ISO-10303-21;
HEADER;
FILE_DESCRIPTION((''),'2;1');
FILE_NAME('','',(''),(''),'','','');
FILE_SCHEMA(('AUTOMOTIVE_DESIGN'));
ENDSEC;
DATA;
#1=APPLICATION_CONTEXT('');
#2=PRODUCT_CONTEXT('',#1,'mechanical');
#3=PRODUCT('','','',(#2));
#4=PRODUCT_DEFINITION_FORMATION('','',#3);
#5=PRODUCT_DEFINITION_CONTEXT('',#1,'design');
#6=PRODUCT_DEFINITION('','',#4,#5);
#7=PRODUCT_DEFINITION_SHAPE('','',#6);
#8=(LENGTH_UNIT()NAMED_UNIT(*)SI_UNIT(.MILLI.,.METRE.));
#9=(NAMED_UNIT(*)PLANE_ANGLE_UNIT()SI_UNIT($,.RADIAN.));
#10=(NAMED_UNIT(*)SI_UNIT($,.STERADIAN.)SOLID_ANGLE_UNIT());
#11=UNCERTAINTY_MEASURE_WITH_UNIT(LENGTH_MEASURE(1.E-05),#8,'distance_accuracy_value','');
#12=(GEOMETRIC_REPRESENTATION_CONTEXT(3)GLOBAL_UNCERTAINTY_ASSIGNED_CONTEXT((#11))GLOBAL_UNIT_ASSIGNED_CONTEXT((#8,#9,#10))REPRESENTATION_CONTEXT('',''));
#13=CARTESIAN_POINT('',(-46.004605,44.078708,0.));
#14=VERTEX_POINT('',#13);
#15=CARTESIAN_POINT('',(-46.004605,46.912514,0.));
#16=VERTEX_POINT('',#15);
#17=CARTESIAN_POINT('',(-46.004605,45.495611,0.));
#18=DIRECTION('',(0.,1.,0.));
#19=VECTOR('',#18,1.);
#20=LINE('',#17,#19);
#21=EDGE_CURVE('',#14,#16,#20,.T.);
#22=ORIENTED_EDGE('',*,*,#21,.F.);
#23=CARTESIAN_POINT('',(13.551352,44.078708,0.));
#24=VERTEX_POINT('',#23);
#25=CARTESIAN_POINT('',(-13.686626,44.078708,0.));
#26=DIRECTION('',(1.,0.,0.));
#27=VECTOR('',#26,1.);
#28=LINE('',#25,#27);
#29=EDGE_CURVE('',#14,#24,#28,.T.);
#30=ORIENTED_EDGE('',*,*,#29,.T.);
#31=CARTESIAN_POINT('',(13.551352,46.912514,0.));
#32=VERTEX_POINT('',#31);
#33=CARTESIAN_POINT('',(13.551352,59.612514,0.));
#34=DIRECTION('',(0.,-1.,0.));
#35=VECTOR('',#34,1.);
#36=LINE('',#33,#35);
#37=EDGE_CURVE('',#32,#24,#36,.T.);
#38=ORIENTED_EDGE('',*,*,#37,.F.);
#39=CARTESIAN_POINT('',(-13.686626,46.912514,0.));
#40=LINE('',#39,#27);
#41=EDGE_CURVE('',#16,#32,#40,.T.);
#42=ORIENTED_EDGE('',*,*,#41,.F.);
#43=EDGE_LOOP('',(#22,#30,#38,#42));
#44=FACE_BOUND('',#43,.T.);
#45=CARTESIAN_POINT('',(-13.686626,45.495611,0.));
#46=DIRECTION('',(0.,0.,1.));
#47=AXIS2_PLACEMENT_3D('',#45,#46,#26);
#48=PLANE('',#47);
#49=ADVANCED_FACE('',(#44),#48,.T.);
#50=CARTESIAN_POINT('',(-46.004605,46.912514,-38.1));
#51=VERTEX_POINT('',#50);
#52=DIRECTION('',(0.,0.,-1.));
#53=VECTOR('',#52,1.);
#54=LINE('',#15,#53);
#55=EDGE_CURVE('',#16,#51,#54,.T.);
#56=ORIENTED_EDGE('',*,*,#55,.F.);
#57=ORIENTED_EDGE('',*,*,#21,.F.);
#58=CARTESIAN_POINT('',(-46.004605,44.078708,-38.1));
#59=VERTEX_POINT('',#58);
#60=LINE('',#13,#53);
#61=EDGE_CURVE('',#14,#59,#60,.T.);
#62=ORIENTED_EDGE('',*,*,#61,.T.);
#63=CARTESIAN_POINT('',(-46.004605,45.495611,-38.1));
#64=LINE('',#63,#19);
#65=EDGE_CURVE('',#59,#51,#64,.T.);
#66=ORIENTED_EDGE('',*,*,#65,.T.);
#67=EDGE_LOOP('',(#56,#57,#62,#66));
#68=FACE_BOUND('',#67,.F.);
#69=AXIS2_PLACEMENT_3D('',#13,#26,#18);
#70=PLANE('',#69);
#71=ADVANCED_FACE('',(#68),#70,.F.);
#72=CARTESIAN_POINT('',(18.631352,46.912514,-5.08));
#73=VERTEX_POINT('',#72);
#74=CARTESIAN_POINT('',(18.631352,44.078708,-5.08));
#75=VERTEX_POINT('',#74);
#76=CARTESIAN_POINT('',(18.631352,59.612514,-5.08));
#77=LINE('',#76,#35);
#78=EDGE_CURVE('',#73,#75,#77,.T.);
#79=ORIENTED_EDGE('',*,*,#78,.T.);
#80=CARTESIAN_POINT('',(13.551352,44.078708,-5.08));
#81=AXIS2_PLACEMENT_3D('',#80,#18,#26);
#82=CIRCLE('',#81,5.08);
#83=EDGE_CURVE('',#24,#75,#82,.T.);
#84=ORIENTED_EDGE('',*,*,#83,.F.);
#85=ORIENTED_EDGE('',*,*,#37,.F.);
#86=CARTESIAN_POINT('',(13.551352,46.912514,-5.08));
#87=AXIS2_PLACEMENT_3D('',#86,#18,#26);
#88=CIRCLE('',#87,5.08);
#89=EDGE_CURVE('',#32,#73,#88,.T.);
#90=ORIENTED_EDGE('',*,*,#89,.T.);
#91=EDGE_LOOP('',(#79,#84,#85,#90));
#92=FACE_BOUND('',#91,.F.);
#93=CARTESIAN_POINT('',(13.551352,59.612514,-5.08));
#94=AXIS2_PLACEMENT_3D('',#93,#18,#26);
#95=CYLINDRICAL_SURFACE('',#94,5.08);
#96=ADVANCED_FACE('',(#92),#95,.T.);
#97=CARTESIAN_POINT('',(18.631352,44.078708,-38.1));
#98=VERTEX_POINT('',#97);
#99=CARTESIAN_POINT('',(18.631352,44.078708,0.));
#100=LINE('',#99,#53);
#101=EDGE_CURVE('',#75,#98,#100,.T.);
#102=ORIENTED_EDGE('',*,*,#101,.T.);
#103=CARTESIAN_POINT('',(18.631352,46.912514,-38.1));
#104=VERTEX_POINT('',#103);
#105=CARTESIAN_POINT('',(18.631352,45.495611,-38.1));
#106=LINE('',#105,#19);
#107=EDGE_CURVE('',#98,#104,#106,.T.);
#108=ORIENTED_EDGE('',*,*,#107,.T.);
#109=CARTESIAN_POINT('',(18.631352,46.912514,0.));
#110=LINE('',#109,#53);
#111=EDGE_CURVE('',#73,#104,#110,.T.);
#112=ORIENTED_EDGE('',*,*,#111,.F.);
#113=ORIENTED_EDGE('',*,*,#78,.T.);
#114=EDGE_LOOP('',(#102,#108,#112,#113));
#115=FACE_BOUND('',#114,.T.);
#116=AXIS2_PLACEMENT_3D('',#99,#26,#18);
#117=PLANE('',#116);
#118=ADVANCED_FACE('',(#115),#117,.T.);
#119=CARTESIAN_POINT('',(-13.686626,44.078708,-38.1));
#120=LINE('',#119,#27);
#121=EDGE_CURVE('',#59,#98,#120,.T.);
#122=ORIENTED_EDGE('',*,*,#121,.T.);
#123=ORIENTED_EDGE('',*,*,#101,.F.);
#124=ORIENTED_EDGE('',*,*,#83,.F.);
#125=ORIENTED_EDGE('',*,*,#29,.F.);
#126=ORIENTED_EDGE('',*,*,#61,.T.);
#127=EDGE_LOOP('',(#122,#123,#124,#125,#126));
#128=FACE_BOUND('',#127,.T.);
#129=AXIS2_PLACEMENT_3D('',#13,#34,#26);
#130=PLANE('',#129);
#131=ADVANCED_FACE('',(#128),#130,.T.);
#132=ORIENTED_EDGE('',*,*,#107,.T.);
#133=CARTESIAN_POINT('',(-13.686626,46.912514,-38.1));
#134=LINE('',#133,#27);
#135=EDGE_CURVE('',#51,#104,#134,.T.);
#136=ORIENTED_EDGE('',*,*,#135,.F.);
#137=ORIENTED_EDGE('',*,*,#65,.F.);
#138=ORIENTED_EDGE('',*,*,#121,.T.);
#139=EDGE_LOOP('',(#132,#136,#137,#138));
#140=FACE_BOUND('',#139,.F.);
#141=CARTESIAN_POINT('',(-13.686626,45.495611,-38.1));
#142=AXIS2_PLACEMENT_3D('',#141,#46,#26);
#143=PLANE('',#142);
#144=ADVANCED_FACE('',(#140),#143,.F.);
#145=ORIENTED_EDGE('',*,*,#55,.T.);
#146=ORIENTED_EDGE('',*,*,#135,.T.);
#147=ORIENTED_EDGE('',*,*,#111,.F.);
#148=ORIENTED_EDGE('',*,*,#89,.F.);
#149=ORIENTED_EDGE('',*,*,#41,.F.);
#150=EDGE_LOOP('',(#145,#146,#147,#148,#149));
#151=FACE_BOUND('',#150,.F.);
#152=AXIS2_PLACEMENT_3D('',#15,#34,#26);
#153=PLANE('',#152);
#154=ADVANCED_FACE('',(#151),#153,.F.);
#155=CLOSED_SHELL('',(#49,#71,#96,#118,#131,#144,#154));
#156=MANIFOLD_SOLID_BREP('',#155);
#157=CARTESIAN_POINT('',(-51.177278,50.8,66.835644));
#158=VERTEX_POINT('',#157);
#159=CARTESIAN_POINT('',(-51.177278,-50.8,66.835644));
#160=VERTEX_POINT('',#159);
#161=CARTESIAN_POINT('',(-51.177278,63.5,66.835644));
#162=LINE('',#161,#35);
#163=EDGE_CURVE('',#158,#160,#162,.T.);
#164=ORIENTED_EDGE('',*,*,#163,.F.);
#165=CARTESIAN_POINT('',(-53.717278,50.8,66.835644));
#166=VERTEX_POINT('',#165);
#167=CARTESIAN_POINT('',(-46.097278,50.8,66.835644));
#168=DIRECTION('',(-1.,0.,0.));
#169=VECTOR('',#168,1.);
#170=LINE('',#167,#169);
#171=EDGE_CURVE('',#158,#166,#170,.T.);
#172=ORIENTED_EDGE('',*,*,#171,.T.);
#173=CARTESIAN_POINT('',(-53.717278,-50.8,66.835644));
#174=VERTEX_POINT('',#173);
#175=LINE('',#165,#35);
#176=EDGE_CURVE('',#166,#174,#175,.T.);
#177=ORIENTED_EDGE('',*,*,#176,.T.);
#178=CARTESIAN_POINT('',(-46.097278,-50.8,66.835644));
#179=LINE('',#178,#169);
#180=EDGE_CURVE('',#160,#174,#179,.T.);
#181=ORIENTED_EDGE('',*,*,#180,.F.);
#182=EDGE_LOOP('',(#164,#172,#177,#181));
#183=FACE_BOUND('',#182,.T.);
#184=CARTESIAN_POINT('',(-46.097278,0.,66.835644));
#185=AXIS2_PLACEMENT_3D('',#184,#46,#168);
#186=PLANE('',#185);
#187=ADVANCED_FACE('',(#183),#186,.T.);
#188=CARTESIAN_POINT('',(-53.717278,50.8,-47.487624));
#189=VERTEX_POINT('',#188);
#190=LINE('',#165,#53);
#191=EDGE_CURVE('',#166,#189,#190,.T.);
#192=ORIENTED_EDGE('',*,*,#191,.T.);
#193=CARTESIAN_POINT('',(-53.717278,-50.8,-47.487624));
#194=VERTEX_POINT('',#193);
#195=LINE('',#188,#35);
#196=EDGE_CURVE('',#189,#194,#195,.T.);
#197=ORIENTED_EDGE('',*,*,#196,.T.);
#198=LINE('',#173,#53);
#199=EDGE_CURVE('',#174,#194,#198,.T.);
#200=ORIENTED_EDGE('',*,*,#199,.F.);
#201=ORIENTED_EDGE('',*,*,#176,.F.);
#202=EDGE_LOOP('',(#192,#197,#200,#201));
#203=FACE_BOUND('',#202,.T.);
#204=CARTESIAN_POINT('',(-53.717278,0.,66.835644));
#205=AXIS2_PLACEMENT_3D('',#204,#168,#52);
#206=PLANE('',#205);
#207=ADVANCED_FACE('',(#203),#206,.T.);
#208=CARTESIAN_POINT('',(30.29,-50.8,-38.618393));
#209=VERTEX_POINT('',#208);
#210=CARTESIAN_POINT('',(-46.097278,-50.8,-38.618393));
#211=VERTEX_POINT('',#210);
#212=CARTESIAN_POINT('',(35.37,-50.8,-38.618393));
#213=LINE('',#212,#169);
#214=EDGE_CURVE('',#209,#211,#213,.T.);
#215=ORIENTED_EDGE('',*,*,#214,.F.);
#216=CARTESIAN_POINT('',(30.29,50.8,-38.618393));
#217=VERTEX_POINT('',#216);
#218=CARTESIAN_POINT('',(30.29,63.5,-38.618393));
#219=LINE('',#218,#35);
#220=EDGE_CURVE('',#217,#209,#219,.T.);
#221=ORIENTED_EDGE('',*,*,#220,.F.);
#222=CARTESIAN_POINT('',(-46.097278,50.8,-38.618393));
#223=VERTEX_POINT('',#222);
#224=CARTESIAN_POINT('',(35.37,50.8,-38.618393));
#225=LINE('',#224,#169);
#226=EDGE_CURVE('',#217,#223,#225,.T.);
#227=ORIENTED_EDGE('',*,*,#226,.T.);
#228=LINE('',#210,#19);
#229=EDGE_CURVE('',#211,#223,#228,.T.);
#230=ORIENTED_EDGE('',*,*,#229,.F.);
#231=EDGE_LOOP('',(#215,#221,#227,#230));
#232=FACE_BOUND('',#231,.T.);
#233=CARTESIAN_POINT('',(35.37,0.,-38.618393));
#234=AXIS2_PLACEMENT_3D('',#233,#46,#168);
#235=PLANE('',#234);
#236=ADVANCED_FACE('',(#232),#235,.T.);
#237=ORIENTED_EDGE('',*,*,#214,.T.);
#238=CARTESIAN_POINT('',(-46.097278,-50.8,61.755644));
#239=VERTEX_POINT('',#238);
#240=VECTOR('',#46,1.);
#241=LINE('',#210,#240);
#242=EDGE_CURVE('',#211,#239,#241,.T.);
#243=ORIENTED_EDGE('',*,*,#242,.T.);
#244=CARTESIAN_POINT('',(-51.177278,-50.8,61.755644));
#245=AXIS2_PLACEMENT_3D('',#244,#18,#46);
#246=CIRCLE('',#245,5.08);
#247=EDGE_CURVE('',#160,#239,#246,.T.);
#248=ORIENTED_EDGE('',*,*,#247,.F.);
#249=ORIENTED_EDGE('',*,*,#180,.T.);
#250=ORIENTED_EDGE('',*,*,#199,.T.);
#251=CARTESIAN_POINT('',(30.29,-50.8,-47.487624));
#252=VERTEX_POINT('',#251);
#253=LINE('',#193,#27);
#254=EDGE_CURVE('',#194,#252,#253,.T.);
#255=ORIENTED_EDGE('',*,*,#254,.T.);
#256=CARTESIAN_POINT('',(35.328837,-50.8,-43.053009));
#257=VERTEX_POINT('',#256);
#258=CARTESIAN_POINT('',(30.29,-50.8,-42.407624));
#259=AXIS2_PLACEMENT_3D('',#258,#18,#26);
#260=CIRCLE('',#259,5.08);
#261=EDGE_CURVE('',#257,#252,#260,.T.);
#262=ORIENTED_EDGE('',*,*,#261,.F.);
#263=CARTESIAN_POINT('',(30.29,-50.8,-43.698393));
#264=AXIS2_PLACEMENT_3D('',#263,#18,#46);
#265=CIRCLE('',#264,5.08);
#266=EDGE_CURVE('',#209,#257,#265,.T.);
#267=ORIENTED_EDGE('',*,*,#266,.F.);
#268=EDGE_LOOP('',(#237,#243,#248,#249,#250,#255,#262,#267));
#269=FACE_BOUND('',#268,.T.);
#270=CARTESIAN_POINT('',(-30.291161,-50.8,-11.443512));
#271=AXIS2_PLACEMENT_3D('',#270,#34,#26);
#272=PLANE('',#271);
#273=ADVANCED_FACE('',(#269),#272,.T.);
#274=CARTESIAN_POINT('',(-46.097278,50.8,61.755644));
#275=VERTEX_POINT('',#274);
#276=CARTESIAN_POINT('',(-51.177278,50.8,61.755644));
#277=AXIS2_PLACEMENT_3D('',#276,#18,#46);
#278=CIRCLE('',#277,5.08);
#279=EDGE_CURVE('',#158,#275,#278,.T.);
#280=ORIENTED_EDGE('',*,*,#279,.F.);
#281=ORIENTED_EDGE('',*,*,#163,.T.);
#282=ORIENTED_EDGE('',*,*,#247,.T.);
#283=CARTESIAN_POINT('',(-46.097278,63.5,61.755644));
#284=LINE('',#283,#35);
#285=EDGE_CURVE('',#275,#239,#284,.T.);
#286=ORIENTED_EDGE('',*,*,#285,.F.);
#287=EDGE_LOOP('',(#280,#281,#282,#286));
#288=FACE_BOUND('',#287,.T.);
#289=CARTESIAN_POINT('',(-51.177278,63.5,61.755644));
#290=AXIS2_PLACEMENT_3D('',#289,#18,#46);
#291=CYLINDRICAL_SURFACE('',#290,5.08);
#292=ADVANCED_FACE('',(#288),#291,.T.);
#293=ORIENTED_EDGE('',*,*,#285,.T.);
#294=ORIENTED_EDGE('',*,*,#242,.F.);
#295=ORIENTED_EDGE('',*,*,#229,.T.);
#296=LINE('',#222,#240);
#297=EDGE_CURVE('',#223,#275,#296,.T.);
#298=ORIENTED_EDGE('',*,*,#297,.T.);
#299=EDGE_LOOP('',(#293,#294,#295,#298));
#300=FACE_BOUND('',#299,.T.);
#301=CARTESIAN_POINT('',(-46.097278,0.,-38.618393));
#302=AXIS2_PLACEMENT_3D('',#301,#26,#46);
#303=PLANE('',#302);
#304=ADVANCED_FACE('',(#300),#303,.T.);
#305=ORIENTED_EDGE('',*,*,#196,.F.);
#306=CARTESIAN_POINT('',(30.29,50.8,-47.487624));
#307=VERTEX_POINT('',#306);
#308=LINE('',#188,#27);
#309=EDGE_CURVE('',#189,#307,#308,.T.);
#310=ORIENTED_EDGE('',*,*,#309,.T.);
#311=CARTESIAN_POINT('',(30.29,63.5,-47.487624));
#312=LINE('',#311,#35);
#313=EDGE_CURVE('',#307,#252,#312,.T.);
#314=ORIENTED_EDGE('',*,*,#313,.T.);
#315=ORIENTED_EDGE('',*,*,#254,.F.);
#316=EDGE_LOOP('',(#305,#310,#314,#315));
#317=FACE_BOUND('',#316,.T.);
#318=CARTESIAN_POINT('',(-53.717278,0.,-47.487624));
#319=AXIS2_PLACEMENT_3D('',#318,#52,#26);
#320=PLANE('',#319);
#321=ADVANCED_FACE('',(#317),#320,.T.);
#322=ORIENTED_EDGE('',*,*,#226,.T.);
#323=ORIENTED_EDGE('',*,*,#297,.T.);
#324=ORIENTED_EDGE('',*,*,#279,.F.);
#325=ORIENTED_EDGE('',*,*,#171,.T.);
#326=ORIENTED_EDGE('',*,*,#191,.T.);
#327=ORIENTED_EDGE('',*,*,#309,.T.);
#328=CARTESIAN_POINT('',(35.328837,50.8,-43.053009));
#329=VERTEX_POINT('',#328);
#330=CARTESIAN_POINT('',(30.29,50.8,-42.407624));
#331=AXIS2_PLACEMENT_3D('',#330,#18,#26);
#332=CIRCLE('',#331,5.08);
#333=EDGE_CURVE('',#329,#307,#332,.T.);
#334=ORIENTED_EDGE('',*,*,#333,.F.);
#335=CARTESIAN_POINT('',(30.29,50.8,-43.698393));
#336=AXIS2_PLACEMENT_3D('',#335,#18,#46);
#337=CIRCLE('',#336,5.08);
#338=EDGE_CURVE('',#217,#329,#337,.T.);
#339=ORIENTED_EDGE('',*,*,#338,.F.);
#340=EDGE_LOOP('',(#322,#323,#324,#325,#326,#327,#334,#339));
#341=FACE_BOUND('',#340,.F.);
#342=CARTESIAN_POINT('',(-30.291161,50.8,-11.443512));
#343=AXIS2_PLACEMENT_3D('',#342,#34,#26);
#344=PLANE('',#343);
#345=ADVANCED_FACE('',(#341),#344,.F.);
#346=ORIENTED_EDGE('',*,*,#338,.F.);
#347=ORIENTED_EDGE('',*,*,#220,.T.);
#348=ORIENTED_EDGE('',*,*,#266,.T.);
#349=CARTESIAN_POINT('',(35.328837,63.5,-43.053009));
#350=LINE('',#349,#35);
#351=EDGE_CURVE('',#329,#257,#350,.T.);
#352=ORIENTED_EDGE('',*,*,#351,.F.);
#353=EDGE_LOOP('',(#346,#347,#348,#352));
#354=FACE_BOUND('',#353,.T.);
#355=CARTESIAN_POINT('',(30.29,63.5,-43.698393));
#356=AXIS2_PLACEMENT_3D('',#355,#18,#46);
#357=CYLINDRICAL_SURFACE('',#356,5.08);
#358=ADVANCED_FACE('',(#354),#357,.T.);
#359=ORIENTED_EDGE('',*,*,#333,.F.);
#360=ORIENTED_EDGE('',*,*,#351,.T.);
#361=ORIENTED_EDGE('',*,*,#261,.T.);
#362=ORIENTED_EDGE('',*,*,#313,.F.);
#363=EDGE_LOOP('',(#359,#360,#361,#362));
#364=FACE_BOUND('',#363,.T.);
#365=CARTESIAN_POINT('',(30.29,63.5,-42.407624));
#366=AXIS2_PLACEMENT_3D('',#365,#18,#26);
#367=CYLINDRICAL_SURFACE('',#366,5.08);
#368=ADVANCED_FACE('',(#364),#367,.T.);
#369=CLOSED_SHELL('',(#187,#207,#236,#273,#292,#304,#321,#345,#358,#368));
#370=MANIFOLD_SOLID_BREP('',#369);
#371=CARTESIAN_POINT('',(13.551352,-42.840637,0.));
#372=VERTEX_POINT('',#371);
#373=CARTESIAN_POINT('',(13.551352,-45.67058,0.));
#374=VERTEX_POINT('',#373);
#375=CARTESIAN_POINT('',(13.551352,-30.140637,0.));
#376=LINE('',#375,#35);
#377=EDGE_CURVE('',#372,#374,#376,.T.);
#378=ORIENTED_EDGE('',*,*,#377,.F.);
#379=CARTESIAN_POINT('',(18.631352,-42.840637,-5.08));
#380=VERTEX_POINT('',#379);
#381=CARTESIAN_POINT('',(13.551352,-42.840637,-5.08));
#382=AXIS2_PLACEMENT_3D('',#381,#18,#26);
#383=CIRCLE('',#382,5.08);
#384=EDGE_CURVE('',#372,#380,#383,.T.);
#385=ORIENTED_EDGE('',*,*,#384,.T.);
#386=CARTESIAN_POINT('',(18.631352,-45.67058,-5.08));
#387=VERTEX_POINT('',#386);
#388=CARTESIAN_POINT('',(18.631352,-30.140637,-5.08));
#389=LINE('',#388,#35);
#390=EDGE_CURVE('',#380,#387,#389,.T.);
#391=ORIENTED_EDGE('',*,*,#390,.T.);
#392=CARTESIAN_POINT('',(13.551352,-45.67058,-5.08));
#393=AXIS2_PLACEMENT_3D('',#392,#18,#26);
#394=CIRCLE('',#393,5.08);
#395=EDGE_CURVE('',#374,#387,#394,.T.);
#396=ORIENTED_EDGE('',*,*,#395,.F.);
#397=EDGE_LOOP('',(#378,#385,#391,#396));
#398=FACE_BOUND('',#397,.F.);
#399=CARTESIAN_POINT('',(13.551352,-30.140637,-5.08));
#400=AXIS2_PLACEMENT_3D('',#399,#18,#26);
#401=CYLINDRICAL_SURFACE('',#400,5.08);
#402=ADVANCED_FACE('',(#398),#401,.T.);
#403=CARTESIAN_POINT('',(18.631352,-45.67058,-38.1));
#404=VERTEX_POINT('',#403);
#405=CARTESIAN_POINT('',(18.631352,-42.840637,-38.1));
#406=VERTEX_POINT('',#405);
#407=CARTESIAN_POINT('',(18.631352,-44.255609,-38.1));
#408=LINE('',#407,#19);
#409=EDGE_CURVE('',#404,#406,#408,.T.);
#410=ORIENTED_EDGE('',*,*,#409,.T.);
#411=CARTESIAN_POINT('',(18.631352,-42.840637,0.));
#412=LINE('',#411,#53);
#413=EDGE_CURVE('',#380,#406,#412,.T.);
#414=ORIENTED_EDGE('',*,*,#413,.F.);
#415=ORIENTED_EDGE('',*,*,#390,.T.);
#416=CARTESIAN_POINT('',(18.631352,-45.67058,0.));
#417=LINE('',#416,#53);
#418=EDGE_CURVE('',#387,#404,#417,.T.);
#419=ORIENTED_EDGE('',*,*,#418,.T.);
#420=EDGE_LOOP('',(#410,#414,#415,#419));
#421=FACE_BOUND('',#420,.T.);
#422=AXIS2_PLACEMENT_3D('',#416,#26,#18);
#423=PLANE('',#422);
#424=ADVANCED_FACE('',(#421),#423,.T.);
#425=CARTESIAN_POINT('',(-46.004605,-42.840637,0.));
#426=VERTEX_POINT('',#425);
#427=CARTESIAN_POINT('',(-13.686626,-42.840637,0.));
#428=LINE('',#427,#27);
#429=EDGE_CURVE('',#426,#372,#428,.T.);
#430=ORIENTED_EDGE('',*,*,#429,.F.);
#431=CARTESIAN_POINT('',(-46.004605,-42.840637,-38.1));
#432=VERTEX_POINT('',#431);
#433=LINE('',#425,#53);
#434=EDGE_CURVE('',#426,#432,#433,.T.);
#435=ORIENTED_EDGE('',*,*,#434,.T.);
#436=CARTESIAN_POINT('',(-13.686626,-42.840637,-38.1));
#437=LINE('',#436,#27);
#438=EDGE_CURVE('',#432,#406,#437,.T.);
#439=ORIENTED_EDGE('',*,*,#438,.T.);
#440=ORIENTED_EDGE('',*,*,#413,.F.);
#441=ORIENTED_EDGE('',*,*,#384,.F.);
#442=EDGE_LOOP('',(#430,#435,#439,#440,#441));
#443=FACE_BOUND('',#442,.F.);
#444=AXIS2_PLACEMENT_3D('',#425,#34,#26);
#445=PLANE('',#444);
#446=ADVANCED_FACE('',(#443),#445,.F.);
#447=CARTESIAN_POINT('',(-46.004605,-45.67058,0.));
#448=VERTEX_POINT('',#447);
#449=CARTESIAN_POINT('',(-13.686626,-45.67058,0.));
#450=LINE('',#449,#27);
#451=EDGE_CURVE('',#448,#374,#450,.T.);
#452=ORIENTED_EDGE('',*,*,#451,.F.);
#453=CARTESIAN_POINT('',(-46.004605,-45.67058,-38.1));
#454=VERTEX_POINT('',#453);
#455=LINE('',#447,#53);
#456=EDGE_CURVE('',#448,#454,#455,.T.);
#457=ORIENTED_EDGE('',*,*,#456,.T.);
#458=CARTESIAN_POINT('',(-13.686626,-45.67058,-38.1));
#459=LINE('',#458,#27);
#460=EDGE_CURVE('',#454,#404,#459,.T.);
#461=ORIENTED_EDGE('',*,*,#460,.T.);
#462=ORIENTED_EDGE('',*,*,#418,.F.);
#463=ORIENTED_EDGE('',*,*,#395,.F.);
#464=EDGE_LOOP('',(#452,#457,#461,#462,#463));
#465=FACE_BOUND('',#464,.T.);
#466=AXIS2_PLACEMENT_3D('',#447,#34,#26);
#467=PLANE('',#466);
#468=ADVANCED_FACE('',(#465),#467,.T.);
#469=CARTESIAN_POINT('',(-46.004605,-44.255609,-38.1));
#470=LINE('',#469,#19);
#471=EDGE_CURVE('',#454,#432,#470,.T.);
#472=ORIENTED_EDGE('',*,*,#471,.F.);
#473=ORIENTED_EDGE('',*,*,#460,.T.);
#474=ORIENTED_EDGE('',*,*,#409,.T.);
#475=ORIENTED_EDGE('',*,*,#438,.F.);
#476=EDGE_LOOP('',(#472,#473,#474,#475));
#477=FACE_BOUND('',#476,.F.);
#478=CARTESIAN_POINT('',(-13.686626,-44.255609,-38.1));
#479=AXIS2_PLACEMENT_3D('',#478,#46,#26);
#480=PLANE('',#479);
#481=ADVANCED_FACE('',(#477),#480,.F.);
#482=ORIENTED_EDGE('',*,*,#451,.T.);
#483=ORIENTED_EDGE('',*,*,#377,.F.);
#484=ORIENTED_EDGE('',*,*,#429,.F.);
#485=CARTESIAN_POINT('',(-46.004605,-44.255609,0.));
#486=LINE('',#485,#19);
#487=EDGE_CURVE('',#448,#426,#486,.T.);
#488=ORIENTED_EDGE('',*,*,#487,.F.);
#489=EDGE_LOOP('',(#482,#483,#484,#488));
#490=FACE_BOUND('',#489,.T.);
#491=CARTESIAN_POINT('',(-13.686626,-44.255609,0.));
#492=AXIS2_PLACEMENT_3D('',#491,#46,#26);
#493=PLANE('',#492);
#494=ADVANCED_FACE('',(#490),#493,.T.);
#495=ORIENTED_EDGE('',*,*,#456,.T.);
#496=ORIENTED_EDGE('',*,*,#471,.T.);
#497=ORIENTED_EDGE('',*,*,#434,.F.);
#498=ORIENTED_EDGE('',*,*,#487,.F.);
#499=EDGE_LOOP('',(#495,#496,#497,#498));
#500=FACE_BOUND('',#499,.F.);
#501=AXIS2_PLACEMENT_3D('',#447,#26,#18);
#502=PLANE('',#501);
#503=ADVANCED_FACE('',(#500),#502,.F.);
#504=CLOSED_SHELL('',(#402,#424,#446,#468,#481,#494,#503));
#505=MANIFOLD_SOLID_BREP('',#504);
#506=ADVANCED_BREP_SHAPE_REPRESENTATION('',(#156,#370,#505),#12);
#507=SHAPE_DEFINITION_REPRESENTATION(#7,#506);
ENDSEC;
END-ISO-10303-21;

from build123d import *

# Parameters (mm, degrees)
F1_DEPTH      = 50.8
F2_W          = 64.6359566599
F2_H          = 2.8338059783
F3_DEPTH      = 38.1
F2_H_2        = 2.8299428523
F4_T1_DEPTH   = 127
F4_2_T1_DEPTH = 28.2338059783
F4_3_T1_DEPTH = 28.2299428523


# Not quite as in the source:
# - a fillet or chamfer that OpenCascade refuses, or shapes differently, is made with other operations: its cross-section is extruded or revolved along the edge and cut away or added


with BuildPart() as f1:
    # F0 (on Front) → F1 (new body, symmetric)
    with BuildSketch(Plane.XZ):
        Polygon((-46.0972779441, 66.8356441736), (-53.7172779441, 66.8356441736), (-53.7172779441, -47.4876239896), (-46.1948015571, -47.4876239896), (35.3699997067, -47.4876239896), (35.3699997067, -38.6183932424), (-46.0972779441, -38.6183932424), align=None)
    extrude(amount=F1_DEPTH, both=True)

    # F4: fillet of radius 5.08 on 3 edges, made by hand

    # F4_s2 → F4_t1 (cut)
    with BuildSketch(Plane.XZ.offset(-63.5)):
        with BuildLine():
            ThreePointArc((30.2899997067, -38.6183932424), (33.8821021552, -40.1062907939), (35.3699997067, -43.6983932424))
            Line((35.3699997067, -43.6983932424), (35.3699997067, -38.6183932424))
            Line((35.3699997067, -38.6183932424), (30.2899997067, -38.6183932424))
        make_face()
        with BuildLine():
            ThreePointArc((35.3699997067, -42.4076239896), (33.8821021552, -45.999726438), (30.2899997067, -47.4876239896))
            Line((30.2899997067, -47.4876239896), (35.3699997067, -47.4876239896))
            Line((35.3699997067, -47.4876239896), (35.3699997067, -42.4076239896))
        make_face()
        with BuildLine():
            ThreePointArc((-51.1772779441, 66.8356441736), (-47.5851754957, 65.347746622), (-46.0972779441, 61.7556441736))
            Line((-46.0972779441, 61.7556441736), (-46.0972779441, 66.8356441736))
            Line((-46.0972779441, 66.8356441736), (-51.1772779441, 66.8356441736))
        make_face()
    extrude(amount=F4_T1_DEPTH, mode=Mode.SUBTRACT)


with BuildPart() as f3:
    # F2 (on Top) → F3 (new body)
    with BuildSketch(Plane.XY):
        with Locations((-13.6866262183, 45.4956106842)):
            Rectangle(F2_W, F2_H)
    extrude(amount=-F3_DEPTH)

    # F4#2: fillet of radius 5.08 on 1 edges, made by hand

    # F4_2_s2 → F4_2_t1 (cut)
    with BuildSketch(Plane.XZ.offset(-59.6125136733)):
        with BuildLine():
            ThreePointArc((18.6313521117, -5.08), (17.1434545601, -1.4878975516), (13.5513521117, 0))
            Line((13.5513521117, 0), (18.6313521117, 0))
            Line((18.6313521117, 0), (18.6313521117, -5.08))
        make_face()
    extrude(amount=F4_2_T1_DEPTH, mode=Mode.SUBTRACT)


with BuildPart() as f3b:
    # F2 (on Top) → F3, piece 2 (new body)
    with BuildSketch(Plane.XY):
        with Locations((-13.6866262183, -44.2556086928)):
            Rectangle(F2_W, F2_H_2)
    extrude(amount=-F3_DEPTH)

    # F4#3: fillet of radius 5.08 on 1 edges, made by hand

    # F4_3_s2 → F4_3_t1 (cut)
    with BuildSketch(Plane.XZ.offset(30.1406372666)):
        with BuildLine():
            ThreePointArc((18.6313521117, -5.08), (17.1434545601, -1.4878975516), (13.5513521117, 0))
            Line((13.5513521117, 0), (18.6313521117, 0))
            Line((18.6313521117, 0), (18.6313521117, -5.08))
        make_face()
    extrude(amount=F4_3_T1_DEPTH, mode=Mode.SUBTRACT)


solid = Compound([f1.part, f3.part, f3b.part])
